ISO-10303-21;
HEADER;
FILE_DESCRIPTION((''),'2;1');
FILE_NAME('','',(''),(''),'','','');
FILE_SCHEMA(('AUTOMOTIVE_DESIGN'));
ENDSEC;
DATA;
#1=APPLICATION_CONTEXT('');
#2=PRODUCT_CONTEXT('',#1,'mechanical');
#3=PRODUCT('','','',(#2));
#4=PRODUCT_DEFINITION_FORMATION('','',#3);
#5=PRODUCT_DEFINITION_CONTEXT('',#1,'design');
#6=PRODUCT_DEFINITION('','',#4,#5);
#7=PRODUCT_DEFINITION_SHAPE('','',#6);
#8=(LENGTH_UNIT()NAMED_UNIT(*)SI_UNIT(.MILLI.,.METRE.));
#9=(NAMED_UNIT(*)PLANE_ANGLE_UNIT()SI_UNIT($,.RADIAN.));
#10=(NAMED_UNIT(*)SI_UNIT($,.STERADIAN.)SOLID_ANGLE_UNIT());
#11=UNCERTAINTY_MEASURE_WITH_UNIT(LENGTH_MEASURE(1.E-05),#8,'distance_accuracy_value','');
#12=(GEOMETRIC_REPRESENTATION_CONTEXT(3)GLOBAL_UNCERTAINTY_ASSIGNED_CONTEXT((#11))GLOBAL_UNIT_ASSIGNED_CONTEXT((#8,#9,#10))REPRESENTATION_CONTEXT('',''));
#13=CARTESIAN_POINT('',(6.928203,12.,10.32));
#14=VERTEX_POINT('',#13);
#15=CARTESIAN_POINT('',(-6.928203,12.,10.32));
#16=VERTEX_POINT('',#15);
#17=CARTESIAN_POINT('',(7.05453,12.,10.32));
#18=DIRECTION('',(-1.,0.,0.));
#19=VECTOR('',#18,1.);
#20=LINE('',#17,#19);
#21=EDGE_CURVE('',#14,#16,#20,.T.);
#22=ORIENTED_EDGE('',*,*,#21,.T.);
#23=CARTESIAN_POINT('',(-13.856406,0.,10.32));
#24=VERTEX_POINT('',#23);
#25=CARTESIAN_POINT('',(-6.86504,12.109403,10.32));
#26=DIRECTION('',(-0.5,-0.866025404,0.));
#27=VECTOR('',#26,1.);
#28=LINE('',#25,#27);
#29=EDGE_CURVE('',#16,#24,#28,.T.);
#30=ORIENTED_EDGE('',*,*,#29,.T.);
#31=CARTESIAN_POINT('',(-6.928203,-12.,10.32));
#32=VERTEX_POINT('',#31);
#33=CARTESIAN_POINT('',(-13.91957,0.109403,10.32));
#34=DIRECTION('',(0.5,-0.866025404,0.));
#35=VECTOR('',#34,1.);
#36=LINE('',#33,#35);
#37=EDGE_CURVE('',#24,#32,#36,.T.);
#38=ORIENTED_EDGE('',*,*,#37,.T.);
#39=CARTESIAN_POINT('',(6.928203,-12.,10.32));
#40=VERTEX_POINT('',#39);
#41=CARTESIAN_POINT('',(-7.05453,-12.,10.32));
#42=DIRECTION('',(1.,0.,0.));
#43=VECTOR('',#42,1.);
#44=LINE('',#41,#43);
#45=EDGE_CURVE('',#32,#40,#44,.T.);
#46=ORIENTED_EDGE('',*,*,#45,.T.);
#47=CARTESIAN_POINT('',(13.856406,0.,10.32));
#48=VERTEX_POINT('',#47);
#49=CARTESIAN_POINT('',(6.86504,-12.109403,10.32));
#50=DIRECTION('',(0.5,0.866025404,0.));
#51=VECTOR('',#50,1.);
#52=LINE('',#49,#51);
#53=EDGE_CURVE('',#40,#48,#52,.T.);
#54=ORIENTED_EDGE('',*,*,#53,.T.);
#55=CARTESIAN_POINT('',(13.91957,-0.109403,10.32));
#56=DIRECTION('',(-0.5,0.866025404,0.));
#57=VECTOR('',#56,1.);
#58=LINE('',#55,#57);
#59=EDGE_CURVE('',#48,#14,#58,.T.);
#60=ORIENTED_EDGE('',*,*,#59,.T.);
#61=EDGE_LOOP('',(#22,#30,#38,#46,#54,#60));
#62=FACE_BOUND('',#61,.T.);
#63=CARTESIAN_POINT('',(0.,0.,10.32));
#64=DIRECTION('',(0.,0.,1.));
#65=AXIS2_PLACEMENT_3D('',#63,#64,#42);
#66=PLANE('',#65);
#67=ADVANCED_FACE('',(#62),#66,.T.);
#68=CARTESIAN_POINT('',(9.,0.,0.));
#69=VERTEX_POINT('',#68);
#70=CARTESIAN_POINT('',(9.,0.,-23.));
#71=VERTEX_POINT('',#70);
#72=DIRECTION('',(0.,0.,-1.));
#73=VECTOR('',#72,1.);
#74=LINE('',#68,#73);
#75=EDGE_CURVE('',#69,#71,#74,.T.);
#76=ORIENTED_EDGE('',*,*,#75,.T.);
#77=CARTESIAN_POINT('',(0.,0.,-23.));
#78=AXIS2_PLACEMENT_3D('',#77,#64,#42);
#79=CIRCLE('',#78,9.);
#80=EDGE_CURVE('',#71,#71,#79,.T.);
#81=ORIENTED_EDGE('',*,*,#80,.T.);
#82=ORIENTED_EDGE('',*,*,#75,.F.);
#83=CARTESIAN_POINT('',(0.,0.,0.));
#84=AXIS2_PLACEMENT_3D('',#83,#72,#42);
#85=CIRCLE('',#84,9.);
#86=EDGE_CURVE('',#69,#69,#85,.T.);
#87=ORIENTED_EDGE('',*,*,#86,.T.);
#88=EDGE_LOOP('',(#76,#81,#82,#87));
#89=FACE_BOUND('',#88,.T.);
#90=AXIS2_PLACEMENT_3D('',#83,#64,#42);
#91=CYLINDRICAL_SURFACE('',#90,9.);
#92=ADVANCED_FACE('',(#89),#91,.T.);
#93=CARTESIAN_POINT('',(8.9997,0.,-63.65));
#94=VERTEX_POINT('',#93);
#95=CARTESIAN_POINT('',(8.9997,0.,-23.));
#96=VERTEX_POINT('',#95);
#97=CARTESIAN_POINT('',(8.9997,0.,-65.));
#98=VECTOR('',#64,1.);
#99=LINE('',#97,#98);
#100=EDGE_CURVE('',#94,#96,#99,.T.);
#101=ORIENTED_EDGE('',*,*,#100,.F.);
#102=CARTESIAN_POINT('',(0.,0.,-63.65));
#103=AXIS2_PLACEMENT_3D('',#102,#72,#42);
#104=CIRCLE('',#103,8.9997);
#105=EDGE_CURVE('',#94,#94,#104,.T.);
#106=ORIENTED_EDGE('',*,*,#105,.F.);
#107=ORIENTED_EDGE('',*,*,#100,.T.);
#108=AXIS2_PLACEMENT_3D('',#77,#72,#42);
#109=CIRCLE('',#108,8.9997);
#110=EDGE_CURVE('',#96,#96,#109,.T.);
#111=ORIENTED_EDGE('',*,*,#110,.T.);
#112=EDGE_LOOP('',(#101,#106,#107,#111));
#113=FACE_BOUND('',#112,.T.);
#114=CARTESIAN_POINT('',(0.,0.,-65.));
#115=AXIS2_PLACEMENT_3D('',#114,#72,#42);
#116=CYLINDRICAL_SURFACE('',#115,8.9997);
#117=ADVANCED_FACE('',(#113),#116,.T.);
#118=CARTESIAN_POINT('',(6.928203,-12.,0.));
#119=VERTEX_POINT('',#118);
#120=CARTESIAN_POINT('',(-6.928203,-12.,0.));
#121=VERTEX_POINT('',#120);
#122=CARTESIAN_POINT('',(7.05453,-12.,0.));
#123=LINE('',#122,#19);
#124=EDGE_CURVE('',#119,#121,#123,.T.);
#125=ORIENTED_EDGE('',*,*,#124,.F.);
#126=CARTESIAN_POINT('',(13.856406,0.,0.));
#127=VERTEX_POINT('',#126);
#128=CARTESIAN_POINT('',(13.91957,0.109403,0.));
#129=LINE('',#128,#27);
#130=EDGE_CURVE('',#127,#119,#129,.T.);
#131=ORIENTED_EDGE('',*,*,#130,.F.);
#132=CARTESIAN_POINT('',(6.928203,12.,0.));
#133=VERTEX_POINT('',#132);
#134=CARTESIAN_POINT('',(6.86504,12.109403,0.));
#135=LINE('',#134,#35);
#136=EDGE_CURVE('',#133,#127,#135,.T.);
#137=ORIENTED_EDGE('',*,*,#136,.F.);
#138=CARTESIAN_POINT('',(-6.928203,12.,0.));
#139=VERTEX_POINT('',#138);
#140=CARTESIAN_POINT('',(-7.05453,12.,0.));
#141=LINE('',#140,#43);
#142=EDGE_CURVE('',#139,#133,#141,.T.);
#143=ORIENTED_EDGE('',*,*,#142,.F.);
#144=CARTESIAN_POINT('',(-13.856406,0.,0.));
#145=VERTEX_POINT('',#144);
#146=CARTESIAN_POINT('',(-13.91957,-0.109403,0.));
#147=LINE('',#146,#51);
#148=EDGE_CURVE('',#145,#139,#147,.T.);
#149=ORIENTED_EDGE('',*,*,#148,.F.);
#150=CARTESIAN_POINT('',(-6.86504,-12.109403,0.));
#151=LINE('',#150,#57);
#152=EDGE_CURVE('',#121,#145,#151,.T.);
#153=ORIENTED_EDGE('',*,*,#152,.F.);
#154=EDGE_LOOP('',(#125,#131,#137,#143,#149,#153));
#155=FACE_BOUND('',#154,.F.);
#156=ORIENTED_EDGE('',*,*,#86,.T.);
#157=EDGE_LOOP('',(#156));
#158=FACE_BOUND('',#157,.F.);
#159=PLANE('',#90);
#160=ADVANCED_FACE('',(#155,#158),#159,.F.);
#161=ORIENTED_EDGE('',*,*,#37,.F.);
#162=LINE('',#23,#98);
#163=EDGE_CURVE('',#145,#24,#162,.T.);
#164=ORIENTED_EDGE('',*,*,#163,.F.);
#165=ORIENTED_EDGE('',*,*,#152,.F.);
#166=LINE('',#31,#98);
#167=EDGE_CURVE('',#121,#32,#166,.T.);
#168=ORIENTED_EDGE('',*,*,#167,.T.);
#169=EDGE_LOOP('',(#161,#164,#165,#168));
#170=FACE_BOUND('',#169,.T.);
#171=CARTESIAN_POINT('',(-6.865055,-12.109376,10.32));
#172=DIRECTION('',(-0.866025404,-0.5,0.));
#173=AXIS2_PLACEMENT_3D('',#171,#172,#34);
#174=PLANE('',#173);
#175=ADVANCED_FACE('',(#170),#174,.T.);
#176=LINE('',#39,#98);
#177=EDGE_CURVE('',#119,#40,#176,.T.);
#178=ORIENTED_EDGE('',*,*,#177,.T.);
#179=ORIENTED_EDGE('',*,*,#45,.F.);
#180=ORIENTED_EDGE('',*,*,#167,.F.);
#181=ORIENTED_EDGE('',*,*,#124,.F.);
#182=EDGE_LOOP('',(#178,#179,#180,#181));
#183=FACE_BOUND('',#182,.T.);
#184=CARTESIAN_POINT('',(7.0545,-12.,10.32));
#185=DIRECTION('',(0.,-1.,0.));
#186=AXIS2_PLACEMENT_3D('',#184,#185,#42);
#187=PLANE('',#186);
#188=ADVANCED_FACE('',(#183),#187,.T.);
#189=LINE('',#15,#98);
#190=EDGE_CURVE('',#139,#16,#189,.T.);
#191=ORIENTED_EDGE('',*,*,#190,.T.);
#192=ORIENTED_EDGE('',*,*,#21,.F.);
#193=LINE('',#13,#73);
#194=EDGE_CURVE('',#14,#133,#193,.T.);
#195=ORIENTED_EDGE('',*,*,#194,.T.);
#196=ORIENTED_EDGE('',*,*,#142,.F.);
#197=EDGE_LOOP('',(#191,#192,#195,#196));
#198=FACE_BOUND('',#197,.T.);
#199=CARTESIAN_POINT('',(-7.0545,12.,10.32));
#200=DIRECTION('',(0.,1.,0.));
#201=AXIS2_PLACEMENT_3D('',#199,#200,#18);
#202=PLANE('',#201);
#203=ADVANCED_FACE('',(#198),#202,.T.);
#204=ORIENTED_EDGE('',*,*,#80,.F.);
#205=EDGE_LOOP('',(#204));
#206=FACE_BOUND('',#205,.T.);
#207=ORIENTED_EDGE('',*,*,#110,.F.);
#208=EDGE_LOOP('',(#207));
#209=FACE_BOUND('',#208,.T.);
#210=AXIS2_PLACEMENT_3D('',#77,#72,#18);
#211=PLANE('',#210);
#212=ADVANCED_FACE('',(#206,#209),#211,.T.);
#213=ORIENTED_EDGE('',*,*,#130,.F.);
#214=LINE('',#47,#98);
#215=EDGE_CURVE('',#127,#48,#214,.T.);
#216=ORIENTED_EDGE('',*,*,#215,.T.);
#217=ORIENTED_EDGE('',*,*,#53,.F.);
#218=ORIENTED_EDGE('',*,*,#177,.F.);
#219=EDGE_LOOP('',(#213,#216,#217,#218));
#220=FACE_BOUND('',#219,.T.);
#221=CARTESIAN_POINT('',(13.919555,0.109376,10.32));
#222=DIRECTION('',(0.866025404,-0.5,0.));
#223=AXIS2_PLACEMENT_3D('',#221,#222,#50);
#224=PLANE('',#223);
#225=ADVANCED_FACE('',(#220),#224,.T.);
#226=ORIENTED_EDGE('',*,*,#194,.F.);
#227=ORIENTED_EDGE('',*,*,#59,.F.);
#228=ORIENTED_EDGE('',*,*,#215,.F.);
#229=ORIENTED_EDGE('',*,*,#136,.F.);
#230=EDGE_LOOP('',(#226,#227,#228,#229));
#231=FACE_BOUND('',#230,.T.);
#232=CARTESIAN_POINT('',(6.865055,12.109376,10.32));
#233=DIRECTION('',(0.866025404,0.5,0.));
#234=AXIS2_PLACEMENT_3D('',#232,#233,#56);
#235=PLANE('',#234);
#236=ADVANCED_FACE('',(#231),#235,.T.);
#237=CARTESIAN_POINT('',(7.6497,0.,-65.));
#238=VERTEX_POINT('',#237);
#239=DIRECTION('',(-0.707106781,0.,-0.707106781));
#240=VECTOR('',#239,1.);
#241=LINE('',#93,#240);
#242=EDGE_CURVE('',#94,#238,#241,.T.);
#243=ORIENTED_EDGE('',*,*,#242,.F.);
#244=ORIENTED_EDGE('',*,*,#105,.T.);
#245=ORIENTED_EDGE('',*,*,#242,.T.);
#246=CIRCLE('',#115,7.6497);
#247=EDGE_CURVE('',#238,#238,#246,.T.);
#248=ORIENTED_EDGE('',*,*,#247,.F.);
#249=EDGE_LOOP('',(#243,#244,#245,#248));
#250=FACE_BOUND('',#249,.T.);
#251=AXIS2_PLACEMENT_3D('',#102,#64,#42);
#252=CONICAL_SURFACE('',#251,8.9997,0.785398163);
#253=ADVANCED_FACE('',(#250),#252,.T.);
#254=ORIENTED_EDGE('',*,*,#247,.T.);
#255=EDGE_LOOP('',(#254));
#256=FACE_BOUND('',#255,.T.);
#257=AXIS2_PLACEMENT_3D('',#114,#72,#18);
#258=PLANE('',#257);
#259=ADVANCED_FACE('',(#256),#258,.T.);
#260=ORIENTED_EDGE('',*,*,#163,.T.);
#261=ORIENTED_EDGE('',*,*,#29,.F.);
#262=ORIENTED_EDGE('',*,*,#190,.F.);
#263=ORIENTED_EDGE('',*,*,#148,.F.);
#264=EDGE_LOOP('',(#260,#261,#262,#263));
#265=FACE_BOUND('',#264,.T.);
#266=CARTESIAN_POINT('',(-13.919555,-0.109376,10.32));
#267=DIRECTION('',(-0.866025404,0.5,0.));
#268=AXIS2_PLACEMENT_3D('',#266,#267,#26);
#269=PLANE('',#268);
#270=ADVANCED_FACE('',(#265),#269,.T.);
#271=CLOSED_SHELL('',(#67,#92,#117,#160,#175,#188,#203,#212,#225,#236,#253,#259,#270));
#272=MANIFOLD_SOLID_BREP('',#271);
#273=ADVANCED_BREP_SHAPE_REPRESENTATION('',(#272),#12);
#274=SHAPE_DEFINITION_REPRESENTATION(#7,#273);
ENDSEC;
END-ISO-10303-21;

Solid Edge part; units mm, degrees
sketch "Sketch1" plane through (0, 0, 0) normal (0, 0, 1) x (1, 0, 0)
  circle A0 centre (0, 0) radius 13.92
  dimension "D1" = 27.84
extrude "Protrusion1" add sketch "Sketch1" along normal blind 10.32
sketch "Sketch2" plane through (0, 0, 0) normal (0, 0, -1) x (1, 0, 0)
  circle A0 centre (0, 0) radius 9
extrude "Protrusion2" add sketch "Sketch2" along normal blind 65
sketch "Sketch3" plane through (0, 0, -65) normal (0, 0, -1) x (1, 0, 0)
  circle A0 centre (0, 0) radius 8.9997
extrude "Cutout1" cut sketch "Sketch3" against normal blind 42 flip side to cut
chamfer "Chamfer_1" distance 1.35 angle 45 1 edges at (-8.9997, 0, -65)
sketch "Sketch4" plane through (0, 0, 10.32) normal (0, 0, 1) x (1, 0, 0)
  line L0 (-7.0545, 12) -> (7.0545, 12)
  dimension "D1" = 24
extrude "Cutout2" cut sketch "Sketch4" against normal up to next material side at (0, 12.05, 10.32)
pattern_circular "Pattern1" count 6 over 360 about axis through (0, 0, 10.32) along (0, 0, 1) of "Cutout2"
properties part number "24104655"
